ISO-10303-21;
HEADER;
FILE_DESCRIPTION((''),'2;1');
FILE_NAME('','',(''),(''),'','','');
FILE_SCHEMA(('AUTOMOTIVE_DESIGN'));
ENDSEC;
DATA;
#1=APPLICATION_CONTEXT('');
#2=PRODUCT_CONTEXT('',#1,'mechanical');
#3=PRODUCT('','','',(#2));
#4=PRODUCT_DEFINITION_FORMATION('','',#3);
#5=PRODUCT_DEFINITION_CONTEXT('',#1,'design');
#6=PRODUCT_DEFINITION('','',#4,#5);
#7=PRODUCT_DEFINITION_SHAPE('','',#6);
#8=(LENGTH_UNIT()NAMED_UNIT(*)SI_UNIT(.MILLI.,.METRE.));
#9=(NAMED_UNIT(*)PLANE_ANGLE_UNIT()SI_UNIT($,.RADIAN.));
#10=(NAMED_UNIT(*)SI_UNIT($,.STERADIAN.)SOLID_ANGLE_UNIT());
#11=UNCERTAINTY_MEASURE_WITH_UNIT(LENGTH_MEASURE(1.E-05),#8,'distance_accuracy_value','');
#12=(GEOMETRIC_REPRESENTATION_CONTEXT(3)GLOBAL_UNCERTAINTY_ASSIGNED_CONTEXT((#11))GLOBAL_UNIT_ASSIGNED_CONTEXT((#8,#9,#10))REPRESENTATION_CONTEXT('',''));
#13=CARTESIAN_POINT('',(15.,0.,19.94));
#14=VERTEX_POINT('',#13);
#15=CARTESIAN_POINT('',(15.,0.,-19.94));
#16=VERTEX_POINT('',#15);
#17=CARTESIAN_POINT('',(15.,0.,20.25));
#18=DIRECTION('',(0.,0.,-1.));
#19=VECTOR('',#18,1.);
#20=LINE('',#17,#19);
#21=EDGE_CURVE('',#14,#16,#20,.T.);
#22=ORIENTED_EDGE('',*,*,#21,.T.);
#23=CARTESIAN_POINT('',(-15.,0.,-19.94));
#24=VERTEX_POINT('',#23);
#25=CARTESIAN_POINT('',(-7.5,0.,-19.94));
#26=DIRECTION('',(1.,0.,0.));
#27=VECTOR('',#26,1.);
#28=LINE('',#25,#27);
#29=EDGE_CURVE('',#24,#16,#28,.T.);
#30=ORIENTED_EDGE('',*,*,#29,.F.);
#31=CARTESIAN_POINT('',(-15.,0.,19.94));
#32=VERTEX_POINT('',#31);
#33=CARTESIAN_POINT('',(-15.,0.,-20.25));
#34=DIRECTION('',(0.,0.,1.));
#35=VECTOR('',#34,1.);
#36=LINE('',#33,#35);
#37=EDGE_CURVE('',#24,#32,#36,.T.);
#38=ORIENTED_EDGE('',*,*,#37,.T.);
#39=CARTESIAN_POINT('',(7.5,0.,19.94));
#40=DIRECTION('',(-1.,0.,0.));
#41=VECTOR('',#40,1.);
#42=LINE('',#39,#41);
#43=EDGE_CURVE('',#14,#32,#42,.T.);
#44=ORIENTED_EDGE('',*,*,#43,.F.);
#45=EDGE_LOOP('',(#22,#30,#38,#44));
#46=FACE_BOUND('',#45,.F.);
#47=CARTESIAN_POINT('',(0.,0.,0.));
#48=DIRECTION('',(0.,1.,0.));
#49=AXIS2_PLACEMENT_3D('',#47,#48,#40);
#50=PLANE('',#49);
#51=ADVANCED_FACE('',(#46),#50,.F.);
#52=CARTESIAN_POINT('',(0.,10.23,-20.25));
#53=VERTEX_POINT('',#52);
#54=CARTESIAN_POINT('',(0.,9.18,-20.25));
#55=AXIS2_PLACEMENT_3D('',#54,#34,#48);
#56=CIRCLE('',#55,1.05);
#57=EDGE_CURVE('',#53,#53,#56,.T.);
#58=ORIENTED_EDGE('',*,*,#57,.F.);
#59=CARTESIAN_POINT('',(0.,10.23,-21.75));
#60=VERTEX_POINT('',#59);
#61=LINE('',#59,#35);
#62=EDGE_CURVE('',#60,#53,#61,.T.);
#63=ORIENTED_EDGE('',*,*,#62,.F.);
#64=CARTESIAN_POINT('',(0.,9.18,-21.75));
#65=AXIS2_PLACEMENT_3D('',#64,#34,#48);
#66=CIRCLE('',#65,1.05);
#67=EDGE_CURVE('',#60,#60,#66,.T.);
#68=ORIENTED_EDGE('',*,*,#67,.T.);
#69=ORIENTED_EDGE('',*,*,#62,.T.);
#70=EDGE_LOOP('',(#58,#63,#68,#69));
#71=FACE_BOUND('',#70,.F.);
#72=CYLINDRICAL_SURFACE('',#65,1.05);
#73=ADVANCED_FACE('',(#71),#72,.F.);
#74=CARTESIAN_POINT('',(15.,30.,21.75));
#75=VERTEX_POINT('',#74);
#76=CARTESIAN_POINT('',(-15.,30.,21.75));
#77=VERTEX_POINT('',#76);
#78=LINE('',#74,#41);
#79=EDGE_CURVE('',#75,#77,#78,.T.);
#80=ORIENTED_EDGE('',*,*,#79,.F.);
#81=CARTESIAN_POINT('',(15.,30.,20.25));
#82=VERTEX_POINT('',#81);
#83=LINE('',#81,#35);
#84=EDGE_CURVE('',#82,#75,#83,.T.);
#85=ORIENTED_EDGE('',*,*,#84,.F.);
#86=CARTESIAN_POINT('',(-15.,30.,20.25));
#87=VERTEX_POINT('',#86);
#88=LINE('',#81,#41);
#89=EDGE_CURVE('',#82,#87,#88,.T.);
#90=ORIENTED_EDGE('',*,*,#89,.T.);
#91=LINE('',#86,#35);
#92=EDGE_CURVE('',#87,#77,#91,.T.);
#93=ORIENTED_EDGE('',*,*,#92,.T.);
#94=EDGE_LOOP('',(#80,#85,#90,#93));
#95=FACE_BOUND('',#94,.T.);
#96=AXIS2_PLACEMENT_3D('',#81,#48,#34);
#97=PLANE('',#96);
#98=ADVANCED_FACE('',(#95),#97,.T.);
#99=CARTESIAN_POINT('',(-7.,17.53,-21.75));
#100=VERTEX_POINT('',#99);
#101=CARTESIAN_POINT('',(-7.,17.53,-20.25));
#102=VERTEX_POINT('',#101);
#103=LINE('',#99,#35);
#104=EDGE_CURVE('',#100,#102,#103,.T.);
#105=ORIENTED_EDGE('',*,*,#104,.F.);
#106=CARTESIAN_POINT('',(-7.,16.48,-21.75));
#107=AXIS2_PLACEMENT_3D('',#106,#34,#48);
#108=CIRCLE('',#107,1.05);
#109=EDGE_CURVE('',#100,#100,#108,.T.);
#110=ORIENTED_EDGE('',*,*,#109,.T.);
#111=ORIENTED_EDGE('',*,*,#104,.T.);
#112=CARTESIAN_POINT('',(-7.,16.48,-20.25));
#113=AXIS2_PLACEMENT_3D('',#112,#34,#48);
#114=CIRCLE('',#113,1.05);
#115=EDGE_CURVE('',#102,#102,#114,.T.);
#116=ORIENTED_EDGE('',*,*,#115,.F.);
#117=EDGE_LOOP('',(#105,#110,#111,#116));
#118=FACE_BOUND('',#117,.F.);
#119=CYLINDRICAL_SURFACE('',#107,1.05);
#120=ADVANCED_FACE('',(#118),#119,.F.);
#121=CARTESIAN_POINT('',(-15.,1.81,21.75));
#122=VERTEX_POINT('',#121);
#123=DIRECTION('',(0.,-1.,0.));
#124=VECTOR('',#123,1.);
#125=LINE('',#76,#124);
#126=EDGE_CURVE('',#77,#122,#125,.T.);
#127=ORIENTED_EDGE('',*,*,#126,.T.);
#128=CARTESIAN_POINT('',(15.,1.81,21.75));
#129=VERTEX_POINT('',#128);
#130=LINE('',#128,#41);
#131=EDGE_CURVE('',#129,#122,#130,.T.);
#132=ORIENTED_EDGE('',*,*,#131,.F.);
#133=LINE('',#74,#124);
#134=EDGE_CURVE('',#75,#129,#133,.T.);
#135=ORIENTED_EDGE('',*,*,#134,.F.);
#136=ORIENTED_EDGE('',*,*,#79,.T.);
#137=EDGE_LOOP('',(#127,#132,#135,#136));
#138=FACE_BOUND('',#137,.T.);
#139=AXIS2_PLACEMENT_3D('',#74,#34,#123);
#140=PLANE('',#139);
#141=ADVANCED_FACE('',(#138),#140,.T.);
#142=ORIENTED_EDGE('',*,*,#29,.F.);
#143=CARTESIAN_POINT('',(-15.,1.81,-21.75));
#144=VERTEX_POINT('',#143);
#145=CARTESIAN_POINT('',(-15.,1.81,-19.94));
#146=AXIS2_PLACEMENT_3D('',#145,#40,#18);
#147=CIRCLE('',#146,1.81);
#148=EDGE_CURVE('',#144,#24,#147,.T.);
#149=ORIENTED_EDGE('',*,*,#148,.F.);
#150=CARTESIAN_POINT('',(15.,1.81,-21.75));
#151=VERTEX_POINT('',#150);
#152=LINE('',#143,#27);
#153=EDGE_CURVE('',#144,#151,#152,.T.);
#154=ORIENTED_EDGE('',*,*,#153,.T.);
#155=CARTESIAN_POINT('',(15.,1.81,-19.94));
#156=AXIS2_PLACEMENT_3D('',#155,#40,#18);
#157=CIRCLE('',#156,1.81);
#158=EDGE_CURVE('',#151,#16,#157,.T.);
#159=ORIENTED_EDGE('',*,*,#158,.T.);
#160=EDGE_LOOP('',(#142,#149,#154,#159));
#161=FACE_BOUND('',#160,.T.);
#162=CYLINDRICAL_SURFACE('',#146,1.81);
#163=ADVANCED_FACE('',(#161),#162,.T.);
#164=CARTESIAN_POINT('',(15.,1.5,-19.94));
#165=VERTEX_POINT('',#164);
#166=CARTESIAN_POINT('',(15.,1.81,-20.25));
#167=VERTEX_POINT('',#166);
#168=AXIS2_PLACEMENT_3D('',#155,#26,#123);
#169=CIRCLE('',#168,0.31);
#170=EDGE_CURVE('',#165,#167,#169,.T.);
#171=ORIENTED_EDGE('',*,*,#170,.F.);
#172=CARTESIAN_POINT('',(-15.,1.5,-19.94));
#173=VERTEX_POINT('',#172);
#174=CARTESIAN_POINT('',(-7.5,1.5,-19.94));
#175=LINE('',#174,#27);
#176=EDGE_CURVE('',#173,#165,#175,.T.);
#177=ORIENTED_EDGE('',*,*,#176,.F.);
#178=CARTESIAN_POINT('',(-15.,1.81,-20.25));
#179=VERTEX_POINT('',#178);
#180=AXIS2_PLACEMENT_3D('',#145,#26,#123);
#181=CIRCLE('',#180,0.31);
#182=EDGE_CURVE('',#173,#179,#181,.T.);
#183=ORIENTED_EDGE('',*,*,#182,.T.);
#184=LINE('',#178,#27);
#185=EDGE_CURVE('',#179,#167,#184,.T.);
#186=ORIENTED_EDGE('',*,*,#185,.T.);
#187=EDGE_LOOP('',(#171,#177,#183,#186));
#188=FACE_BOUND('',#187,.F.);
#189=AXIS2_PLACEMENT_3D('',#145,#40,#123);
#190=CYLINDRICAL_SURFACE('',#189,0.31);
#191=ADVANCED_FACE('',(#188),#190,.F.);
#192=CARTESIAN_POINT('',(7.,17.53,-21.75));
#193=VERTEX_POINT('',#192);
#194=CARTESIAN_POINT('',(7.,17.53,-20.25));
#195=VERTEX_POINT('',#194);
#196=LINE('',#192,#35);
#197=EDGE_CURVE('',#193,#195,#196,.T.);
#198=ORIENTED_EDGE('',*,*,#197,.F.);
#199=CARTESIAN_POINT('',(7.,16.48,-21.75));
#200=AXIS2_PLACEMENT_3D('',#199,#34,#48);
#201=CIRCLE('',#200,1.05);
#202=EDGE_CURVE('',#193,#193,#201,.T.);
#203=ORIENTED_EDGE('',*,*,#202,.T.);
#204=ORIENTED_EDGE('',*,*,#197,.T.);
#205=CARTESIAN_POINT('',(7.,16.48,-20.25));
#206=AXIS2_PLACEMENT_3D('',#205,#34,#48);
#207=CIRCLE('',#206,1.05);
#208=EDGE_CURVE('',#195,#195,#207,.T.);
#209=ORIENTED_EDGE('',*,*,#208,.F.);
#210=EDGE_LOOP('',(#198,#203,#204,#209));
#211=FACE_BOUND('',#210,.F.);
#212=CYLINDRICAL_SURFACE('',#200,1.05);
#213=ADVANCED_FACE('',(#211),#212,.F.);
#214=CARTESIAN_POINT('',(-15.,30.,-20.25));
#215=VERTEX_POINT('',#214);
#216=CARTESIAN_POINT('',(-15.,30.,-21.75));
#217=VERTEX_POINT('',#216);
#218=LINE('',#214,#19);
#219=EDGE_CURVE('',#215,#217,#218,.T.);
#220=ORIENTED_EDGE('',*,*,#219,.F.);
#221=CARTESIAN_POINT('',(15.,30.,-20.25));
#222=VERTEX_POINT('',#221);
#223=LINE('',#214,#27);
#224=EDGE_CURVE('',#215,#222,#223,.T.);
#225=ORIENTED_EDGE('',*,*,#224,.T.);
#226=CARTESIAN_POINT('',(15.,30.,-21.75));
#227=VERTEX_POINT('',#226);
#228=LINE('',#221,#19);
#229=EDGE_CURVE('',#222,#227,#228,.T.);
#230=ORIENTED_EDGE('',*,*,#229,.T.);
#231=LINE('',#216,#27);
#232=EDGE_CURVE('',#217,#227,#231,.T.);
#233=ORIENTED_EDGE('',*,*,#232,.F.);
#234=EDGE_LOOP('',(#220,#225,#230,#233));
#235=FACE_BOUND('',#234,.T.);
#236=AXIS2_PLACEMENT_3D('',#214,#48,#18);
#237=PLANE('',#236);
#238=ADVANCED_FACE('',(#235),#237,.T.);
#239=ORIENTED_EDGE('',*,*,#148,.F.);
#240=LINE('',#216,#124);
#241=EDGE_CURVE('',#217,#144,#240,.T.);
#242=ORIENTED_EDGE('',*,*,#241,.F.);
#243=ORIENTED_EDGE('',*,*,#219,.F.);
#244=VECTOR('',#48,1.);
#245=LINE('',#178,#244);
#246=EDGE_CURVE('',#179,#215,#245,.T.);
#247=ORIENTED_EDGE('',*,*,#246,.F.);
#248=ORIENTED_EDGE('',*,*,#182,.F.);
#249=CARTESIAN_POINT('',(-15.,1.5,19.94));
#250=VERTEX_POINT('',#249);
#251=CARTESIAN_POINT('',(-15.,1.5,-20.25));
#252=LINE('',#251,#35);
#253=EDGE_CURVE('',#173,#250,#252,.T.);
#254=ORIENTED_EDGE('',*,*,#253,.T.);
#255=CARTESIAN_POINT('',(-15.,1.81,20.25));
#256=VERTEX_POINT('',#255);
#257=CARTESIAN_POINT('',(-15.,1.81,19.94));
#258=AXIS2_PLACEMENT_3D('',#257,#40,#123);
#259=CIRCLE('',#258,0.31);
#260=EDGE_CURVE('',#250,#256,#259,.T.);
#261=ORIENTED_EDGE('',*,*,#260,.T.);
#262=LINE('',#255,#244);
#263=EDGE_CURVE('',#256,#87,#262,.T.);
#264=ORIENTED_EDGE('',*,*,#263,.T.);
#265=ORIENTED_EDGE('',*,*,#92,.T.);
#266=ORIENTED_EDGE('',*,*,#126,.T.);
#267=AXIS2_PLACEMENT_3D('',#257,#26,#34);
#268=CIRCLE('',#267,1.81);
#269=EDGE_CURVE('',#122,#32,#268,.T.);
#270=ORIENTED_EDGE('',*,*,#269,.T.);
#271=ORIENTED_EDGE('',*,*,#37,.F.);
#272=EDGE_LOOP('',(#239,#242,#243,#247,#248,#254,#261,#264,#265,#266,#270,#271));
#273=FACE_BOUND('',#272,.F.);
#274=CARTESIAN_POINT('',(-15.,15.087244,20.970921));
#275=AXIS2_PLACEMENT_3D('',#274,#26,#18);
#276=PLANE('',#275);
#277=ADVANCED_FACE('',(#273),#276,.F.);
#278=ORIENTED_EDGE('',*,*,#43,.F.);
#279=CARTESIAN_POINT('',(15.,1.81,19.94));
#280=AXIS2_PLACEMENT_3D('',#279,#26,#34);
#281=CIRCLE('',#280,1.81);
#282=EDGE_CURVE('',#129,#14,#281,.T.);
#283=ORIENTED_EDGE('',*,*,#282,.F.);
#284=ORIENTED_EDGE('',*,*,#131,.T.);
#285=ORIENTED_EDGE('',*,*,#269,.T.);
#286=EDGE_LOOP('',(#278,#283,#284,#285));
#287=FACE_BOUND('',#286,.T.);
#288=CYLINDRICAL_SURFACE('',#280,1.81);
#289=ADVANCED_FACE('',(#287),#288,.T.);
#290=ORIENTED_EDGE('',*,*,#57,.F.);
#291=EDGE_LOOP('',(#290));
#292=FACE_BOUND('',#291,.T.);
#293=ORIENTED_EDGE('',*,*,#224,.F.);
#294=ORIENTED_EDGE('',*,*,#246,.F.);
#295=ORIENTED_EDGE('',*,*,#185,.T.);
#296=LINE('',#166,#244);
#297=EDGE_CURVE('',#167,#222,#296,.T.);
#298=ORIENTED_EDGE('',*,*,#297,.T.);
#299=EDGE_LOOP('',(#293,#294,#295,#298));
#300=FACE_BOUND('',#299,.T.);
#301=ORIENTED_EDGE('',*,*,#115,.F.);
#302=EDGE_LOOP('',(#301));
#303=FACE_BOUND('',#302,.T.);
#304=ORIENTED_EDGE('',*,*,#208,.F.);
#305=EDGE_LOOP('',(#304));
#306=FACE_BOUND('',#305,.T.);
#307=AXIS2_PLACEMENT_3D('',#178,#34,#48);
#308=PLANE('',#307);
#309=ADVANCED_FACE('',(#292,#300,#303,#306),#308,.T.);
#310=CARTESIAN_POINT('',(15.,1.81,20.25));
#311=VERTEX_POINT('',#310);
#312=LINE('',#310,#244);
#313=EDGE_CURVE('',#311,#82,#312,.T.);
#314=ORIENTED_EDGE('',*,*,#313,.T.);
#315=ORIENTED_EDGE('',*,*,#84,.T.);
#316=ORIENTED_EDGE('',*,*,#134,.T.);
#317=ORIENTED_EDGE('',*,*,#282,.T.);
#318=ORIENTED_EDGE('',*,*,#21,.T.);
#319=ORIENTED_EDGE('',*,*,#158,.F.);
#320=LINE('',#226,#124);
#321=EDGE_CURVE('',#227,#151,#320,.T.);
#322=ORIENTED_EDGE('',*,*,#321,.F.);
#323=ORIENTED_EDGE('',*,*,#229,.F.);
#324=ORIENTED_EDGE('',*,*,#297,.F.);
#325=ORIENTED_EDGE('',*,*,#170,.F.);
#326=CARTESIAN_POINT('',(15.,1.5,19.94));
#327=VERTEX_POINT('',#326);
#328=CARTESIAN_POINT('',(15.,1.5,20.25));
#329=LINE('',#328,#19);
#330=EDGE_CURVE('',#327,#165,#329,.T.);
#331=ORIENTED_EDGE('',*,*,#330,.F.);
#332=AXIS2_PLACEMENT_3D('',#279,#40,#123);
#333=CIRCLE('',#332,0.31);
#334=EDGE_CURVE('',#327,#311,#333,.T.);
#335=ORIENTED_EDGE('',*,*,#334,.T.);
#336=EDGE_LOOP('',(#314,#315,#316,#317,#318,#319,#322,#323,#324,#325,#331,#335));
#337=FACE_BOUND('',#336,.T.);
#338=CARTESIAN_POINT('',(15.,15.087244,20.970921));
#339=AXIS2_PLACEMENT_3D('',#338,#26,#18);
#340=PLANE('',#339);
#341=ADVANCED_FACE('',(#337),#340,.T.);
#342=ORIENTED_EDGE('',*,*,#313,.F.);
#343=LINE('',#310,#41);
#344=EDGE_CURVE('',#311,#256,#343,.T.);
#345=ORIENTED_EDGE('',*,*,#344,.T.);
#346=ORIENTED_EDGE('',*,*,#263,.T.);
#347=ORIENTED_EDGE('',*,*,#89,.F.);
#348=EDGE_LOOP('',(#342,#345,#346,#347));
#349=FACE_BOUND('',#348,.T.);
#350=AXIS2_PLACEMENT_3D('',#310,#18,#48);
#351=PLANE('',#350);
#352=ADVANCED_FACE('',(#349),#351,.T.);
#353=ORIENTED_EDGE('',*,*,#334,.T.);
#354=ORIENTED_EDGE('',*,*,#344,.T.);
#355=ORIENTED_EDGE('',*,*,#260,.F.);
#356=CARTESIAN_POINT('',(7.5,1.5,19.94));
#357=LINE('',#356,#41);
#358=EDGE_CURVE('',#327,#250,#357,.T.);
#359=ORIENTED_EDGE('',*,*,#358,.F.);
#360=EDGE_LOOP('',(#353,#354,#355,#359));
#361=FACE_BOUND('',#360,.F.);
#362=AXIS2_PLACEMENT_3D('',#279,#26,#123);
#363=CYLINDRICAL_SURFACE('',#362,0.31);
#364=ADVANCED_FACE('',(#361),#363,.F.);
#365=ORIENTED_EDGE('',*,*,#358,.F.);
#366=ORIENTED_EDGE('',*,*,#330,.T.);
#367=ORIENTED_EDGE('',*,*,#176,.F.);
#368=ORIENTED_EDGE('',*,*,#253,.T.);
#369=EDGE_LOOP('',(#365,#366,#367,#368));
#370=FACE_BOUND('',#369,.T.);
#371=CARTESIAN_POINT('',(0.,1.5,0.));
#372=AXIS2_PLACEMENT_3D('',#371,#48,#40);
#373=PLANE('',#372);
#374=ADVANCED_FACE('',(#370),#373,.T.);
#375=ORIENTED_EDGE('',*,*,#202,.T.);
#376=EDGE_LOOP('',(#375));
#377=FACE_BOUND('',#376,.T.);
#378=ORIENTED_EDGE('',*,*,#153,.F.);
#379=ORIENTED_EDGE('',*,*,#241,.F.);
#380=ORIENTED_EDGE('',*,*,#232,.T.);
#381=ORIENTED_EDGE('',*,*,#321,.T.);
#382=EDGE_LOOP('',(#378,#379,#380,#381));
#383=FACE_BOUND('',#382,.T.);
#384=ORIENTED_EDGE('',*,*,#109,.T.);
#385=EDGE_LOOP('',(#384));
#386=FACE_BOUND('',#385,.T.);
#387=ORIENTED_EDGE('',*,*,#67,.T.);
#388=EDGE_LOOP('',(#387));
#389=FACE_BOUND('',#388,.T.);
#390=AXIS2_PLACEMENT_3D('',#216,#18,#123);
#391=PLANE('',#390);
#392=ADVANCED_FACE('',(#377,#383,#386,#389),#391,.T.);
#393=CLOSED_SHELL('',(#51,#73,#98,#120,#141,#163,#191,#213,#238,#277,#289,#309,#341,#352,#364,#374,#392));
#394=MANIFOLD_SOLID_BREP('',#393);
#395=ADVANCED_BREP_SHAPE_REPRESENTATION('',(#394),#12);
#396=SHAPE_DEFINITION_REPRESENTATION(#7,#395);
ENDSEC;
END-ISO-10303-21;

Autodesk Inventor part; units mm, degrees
ref_plane "YZ Plane" through (0, 0, 0) normal (1, 0, 0) x (0, 1, 0)
ref_plane "XZ Plane" through (0, 0, 0) normal (0, 1, 0) x (-1, 0, 0)
ref_plane "XY Plane" through (0, 0, 0) normal (0, 0, 1) x (1, 0, 0)
sketch "Sketch1" plane through (0, 0, 0) normal (0, 1, 0) x (-1, 0, 0)
  line L0 (15, 20.25) -> (-15, 20.25)
  line L1 (-15, 20.25) -> (-15, -20.25)
  line L2 (-15, -20.25) -> (15, -20.25)
  line L3 (15, -20.25) -> (15, 20.25)
  point P0 (0, 0)
  point P1 (15, 0)
  point P2 (0, 20.25)
  dimension "d0" = 30
  dimension "d1" = 40.5
extrude "Plate1" add sketch "Sketch1" along normal blind 1.5
sketch "Sketch2" plane through (15, 0, 21.75) normal (0, 0, -1) x (-1, 0, 0)
  line L0 (30, 0) -> (0, 0)
  line L1 (0, 0) -> (0, 30)
  line L2 (0, 30) -> (30, 30)
  line L3 (30, 30) -> (30, 0)
edge flange "Flange1" height 30 angle 90 thickness 1.5 bend radius 0.31 thickness toward (0, 0, -1) relief tear relief width 1.5 relief depth 0.75 corner gap 0.31 corner form 0 edges at (0, 1.5, 20.25) (0, 1.5, -20.25) wall of the first edge with corners at (-15, 0, 21.75) (15, 0, 21.75) (15, 30, 21.75) (-15, 30, 21.75)
bend "Bend1"
corner "Corner1"
sketch "Sketch3" plane through (15, 30, -21.75) normal (0, 0, -1) x (-1, 0, 0)
  circle A0 centre (15, -20.82) radius 0.7835 projected
  circle A1 centre (8, -13.52) radius 0.7835 projected
  circle A2 centre (22, -13.52) radius 0.7835 projected
  circle A3 centre (7, -0.3) radius 0.7835 projected
  circle A4 centre (23, -0.3) radius 0.7835 projected
  line L0 (21.07, -22.22) -> (8.93, -22.22) projected
  line L1 (21.07, -22.22) -> (21.07, -21.5) projected
  arc A5 (23.07, -19.5) -> (21.07, -21.5) centre (23.07, -21.5) ccw projected
  line L2 (23.07, -19.5) -> (23.79, -19.5) projected
  line L3 (23.79, 12.6) -> (23.79, -19.5) projected
  line L4 (23.79, 12.6) -> (23.07, 12.6) projected
  arc A6 (21.07, 14.6) -> (23.07, 12.6) centre (23.07, 14.6) ccw projected
  line L5 (21.07, 14.6) -> (21.07, 15.32) projected
  line L6 (8.93, 15.32) -> (21.07, 15.32) projected
  line L7 (8.93, 15.32) -> (8.93, 14.6) projected
  arc A7 (6.93, 12.6) -> (8.93, 14.6) centre (6.93, 14.6) ccw projected
  line L8 (6.93, 12.6) -> (6.21, 12.6) projected
  line L9 (6.21, -19.5) -> (6.21, 12.6) projected
  line L10 (6.21, -19.5) -> (6.93, -19.5) projected
  arc A8 (8.93, -21.5) -> (6.93, -19.5) centre (6.93, -21.5) ccw projected
  line L11 (8.93, -21.5) -> (8.93, -22.22) projected
  circle A9 centre (15, 6.6) radius 6.4 projected
  point P0 (15, -30)
hole "Hole1" at (-7, 16.48, -21.75) at (0, 9.18, -21.75) at (7, 16.48, -21.75) direction (0, 0, 1) diameter 2.1 depth 1.5
equation "\"d18\" = Thickness"
equation "\"d2\" = Thickness"
equation "\"d3\" = BendReliefWidth"
equation "\"d4\" = BendReliefDepth"
equation "\"d5\" = MinimumRemnant"
equation "\"d6\" = TransitionRadius"
equation "\"d9\" = BendRadius"
equation "\"d10\" = CornerReliefSize"
equation "\"d11\" = GapSize"
equation "\"d12\" = JacobiRadiusSize"
equation "\"BendReliefWidth\" = Thickness"
equation "\"BendReliefDepth\" = 0.5 * Thickness"
equation "\"CornerReliefSize\" = 4 * Thickness"
equation "\"MinimumRemnant\" = 2 * Thickness"
equation "\"TransitionRadius\" = BendRadius"
equation "\"JacobiRadiusSize\" = BendRadius"
equation "\"GapSize\" = Thickness"
equation "\"Thickness\" = 1.5"
equation "\"BendRadius\" = 0.31"
properties part number "chris" material "Aluminum 6061-AHC"
